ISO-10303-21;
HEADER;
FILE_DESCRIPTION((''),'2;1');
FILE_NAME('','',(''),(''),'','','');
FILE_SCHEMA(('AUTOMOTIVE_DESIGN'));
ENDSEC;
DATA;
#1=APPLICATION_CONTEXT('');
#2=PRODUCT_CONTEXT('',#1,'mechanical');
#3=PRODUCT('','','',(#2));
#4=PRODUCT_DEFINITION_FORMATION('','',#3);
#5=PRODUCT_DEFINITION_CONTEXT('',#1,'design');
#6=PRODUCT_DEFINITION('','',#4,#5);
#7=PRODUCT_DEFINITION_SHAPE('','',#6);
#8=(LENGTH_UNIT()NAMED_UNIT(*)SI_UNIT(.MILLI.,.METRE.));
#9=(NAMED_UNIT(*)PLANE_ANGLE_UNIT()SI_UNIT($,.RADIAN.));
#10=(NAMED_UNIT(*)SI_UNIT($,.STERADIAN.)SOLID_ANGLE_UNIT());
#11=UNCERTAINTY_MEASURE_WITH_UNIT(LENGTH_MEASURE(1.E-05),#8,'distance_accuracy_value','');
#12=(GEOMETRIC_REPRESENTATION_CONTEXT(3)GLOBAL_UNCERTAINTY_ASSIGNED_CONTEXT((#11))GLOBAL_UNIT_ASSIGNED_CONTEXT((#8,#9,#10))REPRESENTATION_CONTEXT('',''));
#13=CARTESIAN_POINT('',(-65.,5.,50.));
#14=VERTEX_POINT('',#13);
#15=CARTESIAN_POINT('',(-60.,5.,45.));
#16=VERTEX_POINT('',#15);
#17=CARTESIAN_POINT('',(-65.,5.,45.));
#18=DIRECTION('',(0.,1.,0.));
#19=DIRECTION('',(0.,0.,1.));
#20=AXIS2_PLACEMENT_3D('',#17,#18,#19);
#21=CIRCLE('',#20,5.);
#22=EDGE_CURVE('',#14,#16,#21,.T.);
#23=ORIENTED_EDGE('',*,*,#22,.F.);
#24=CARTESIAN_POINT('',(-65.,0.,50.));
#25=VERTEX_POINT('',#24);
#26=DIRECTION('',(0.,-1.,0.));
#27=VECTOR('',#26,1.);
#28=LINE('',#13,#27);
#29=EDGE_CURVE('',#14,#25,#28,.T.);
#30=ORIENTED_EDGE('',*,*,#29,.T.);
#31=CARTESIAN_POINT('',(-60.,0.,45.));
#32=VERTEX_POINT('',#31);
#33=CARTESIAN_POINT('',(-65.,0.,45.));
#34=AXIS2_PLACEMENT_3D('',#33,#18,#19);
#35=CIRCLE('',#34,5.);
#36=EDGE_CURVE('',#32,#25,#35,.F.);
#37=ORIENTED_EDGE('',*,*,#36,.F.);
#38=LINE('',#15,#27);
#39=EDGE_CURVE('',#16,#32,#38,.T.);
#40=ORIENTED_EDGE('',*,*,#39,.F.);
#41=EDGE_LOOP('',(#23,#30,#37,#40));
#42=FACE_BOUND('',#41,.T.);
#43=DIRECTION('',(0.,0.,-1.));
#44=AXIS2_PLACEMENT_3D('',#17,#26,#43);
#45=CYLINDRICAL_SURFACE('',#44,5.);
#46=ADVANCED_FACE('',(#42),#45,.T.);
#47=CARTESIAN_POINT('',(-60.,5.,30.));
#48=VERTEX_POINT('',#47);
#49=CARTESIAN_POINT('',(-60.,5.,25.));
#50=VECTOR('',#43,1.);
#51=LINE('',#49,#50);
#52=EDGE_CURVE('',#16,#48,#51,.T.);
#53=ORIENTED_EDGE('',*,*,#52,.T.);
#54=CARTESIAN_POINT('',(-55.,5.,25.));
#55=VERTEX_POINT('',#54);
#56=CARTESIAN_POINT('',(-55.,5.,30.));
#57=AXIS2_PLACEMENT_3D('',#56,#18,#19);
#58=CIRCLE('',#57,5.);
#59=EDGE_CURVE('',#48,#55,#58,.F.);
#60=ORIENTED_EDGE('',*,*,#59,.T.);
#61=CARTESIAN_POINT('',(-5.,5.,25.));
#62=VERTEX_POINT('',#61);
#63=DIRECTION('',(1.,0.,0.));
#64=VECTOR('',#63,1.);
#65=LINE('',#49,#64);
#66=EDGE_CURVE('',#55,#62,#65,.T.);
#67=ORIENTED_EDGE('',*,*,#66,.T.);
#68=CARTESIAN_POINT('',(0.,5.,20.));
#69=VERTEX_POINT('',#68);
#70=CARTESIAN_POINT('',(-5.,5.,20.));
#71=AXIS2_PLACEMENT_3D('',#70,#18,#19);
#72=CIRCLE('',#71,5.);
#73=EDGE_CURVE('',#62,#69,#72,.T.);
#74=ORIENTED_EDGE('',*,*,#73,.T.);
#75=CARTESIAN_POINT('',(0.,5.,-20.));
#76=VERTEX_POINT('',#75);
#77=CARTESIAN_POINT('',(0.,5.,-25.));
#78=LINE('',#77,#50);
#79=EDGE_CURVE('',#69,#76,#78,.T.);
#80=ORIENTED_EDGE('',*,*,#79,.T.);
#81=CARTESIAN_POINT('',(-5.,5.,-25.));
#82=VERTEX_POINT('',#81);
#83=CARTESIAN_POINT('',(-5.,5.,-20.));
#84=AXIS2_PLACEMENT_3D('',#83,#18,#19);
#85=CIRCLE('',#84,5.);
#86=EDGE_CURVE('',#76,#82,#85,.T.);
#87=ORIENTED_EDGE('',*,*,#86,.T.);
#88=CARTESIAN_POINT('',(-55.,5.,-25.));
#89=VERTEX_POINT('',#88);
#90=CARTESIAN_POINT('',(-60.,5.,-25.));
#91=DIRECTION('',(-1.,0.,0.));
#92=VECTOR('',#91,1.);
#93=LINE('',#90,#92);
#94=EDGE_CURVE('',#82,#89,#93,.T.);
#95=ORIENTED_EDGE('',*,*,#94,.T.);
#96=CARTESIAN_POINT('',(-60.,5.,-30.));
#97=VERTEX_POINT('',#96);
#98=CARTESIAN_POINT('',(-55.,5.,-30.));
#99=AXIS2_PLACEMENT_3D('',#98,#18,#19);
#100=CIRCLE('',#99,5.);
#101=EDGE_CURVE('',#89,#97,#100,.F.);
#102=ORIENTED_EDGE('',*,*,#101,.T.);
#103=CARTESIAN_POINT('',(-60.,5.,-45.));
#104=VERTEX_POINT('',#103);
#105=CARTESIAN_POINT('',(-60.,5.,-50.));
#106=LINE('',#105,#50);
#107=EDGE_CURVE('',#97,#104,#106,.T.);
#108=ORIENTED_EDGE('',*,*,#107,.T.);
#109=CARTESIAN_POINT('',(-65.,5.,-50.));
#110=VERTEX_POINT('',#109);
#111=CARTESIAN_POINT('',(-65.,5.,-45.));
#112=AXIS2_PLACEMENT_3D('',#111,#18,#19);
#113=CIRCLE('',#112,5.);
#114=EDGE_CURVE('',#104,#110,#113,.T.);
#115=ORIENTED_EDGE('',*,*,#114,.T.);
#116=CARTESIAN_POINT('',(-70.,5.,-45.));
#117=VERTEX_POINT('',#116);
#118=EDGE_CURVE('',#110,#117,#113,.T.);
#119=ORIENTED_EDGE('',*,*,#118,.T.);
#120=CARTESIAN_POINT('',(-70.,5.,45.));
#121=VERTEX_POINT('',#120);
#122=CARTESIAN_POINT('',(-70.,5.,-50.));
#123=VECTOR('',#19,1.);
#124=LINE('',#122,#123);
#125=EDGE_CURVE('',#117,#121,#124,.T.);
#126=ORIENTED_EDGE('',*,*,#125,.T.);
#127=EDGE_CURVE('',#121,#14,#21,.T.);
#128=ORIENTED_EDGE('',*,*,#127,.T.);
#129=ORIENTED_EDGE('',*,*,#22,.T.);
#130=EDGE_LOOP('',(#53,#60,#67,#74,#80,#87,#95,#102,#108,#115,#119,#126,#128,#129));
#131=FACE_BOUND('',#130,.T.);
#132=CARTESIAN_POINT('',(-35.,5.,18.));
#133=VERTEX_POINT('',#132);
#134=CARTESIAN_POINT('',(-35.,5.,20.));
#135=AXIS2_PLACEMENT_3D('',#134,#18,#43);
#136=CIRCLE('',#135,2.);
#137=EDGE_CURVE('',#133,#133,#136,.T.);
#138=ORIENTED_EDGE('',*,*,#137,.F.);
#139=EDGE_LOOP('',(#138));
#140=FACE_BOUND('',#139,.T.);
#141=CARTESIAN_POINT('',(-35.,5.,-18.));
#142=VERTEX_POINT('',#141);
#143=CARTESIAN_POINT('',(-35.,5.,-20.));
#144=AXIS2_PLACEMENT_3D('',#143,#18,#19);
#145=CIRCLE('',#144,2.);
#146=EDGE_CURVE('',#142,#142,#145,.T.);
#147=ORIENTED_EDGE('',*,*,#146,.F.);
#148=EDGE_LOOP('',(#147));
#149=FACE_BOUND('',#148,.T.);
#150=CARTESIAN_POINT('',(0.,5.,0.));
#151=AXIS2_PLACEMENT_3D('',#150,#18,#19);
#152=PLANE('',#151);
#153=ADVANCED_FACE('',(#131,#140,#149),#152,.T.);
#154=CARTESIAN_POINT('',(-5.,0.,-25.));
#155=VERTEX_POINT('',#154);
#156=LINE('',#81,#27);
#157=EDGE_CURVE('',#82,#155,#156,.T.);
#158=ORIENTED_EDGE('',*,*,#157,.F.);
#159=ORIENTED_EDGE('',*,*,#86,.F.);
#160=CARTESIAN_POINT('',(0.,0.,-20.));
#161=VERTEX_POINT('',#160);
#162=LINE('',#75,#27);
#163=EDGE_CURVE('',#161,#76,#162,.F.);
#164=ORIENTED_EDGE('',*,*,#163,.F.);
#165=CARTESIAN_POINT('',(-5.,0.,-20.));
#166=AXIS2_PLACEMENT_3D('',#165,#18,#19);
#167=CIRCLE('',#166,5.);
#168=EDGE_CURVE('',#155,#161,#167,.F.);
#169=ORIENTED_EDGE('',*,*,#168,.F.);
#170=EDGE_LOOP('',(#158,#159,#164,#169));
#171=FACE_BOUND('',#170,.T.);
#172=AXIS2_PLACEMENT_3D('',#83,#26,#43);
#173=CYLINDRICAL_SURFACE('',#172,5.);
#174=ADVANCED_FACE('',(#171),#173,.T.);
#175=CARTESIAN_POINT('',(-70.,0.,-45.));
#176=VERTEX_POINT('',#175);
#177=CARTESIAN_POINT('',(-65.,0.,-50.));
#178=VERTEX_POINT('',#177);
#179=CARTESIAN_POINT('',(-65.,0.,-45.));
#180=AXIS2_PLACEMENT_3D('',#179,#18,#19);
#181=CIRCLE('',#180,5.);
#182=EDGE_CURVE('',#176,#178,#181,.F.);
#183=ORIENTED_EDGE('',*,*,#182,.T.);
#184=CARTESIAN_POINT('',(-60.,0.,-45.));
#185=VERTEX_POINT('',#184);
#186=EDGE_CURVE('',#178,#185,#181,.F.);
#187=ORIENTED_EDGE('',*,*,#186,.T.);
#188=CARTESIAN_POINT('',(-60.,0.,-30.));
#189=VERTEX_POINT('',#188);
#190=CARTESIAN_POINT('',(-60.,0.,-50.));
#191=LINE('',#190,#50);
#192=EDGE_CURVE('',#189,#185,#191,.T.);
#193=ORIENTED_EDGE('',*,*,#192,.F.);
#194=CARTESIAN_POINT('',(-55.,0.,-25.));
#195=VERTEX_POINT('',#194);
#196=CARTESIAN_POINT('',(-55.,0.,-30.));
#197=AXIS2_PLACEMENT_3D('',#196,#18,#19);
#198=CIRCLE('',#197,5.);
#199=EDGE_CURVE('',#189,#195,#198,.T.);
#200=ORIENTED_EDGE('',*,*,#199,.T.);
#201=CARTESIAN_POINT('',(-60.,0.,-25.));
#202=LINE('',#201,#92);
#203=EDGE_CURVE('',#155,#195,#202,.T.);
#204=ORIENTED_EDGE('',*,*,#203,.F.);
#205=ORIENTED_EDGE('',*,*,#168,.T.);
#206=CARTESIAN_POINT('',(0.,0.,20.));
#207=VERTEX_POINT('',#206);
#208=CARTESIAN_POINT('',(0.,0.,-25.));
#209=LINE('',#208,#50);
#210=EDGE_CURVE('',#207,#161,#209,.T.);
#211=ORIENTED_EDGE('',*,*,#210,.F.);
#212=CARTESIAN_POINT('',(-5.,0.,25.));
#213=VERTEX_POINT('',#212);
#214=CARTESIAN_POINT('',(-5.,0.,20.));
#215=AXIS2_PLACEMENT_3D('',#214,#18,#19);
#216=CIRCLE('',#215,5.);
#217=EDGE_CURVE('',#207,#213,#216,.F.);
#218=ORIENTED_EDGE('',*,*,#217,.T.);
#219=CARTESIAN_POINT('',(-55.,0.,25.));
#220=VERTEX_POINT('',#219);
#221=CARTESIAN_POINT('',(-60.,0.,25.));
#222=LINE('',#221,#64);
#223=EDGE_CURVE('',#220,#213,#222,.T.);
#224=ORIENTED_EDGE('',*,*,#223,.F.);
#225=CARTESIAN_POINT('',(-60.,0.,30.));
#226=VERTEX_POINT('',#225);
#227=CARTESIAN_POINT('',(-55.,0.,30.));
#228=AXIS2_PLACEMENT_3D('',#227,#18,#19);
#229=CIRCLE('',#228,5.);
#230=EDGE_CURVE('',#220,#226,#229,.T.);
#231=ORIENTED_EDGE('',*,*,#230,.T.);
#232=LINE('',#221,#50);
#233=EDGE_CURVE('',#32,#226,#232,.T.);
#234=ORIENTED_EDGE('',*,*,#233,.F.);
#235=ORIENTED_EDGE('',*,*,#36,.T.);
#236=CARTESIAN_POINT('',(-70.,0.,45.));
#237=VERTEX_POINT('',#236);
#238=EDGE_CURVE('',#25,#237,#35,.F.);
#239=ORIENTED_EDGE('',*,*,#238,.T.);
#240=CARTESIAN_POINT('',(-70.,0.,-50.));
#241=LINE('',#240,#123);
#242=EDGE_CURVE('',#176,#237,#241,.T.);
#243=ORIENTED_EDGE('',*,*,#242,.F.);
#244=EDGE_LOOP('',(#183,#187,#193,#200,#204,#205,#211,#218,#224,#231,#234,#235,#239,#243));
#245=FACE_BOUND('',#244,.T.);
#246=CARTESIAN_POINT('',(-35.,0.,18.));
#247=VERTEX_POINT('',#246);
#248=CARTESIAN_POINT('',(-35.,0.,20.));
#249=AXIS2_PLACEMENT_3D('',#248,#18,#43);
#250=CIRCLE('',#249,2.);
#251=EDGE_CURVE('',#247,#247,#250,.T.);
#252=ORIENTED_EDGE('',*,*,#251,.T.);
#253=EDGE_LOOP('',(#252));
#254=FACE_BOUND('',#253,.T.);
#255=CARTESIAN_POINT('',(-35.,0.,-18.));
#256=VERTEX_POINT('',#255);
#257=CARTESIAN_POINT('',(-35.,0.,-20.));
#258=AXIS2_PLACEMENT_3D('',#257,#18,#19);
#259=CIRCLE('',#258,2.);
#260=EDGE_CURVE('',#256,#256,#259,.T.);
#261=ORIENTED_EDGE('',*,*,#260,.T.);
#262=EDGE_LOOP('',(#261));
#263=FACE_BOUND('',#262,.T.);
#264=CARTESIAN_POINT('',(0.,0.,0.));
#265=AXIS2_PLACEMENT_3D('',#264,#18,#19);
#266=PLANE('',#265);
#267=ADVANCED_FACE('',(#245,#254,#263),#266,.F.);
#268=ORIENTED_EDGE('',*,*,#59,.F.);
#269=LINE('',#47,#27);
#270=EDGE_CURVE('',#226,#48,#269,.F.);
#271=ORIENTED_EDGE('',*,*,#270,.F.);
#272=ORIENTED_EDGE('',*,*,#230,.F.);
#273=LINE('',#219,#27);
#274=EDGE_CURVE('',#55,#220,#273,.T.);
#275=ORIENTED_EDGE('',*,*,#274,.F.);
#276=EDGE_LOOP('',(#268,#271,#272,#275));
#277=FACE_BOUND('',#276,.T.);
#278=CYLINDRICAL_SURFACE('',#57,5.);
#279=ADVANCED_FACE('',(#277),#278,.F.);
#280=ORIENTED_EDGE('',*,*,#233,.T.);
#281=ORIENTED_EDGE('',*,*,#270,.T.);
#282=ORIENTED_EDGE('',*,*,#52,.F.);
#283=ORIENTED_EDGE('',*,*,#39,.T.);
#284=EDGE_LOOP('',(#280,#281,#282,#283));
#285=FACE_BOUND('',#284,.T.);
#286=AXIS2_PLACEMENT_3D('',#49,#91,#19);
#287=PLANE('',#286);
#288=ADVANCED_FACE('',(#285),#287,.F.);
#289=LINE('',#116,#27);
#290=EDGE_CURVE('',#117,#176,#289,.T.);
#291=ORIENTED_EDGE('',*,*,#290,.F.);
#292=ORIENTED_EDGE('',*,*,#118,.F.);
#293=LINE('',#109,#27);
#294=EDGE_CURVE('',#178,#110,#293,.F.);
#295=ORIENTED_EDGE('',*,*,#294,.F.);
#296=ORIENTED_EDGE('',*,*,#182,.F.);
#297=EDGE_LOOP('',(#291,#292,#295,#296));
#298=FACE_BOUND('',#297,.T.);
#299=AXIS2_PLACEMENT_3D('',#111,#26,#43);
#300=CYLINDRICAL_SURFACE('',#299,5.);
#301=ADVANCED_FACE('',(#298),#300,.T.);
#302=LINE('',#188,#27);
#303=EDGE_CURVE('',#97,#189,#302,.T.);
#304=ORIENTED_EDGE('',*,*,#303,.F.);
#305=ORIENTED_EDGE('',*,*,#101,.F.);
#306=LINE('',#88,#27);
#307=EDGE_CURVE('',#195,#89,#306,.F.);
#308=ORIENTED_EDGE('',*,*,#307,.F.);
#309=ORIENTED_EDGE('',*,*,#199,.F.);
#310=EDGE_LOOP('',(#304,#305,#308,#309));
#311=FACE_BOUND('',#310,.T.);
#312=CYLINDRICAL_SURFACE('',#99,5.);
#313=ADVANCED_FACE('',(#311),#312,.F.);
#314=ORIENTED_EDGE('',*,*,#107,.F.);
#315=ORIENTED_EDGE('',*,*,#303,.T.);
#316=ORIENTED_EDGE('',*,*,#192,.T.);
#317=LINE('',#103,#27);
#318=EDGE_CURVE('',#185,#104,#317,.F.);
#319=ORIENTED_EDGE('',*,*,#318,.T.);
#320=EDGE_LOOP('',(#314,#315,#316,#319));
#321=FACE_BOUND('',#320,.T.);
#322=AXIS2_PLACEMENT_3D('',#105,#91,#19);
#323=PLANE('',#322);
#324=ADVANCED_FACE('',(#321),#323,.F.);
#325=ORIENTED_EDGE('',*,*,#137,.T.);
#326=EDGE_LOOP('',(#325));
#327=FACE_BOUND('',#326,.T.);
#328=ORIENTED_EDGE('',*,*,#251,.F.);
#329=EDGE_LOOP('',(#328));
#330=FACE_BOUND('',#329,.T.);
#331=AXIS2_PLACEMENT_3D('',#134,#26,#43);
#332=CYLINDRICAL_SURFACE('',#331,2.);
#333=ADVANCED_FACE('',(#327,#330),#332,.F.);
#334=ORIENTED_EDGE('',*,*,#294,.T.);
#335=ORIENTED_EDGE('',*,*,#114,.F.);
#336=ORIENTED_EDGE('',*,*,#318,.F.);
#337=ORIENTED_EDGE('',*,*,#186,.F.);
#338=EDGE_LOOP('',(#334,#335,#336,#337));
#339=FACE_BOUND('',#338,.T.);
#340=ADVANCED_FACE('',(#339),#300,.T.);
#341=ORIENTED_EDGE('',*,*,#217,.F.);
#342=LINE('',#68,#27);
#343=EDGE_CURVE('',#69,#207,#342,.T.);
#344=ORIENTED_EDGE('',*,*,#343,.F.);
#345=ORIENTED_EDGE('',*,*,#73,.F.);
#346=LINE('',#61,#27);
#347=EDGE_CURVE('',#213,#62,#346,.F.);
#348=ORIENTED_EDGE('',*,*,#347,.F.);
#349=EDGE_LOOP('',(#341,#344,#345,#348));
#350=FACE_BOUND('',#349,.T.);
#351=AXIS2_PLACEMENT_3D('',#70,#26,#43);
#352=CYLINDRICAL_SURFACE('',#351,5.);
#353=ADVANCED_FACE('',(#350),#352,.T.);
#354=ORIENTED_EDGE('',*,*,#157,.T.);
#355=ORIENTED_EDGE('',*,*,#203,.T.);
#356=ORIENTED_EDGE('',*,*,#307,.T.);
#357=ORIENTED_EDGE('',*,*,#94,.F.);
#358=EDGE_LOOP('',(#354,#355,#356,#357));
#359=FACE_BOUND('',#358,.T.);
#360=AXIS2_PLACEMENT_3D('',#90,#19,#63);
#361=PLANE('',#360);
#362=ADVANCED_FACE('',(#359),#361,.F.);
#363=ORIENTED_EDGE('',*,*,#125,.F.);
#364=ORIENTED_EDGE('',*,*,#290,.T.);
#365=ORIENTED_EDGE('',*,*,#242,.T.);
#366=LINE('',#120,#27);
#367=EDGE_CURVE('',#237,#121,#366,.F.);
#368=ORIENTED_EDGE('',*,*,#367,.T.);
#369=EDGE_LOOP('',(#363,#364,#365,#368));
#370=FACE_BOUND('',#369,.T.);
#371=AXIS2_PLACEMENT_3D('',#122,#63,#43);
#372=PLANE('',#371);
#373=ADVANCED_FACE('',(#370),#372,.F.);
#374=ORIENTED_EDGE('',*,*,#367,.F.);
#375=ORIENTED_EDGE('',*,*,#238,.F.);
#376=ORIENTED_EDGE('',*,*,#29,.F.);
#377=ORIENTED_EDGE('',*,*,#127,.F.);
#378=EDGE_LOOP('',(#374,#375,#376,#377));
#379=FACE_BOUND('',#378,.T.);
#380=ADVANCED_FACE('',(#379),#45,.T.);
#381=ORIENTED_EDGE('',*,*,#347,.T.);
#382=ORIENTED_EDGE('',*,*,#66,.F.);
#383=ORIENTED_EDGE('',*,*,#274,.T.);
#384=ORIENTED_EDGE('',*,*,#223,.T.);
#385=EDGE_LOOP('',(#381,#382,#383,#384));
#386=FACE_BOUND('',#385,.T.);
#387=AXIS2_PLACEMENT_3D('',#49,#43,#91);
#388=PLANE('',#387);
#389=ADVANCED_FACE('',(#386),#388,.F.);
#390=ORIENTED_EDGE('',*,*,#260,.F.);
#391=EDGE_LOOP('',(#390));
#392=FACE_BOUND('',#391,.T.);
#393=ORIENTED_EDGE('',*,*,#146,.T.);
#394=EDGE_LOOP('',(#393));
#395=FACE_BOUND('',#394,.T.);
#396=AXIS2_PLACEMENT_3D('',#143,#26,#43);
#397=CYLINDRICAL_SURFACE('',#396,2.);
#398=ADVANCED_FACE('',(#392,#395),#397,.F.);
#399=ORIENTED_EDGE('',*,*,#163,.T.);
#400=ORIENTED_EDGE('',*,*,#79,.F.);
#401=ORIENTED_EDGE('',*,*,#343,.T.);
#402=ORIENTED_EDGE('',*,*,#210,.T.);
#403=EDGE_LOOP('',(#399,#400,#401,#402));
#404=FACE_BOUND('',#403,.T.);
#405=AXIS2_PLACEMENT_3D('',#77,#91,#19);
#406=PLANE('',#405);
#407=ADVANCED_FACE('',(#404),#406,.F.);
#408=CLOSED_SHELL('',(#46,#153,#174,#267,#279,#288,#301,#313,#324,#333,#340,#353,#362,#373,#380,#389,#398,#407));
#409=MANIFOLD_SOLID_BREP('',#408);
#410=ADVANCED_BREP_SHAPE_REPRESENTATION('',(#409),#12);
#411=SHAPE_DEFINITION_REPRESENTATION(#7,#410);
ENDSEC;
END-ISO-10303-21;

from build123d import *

# Parameters (mm, degrees)
SKETCH_2_R      = 2
EXTRUDE_1_DEPTH = 5
FILLET_1_R      = 5


with BuildPart() as part:
    # 스케치2 → 보스-돌출1 (new body)
    with BuildSketch(Plane(origin=(0, 0, 0), x_dir=(1, 0, 0), z_dir=(0, 1, 0))):
        Polygon((-60, -25), (-60, -50), (-70, -50), (-70, 50), (-60, 50), (-60, 25), (0, 25), (0, -25), align=None)
        with Locations(Location((-35, 20, 0), (0, 0, 270))):
            Circle(SKETCH_2_R, mode=Mode.SUBTRACT)
        with Locations(Location((-35, -20, 0), (0, 0, 90))):
            Circle(SKETCH_2_R, mode=Mode.SUBTRACT)
    extrude(amount=EXTRUDE_1_DEPTH)

    # 필렛1
    fillet_1_edges = [part.edges().sort_by_distance(p)[0] for p in [
        (-60, 2.5, -25),
        (0, 2.5, -25),
        (0, 2.5, 25),
        (-60, 2.5, 25),
        (-60, 2.5, 50),
        (-70, 2.5, 50),
        (-60, 2.5, -50),
        (-70, 2.5, -50),
    ]]
    fillet(fillet_1_edges, radius=FILLET_1_R - 0.0001)  # a hair under: the kernel refuses the full size


solid = part.part
